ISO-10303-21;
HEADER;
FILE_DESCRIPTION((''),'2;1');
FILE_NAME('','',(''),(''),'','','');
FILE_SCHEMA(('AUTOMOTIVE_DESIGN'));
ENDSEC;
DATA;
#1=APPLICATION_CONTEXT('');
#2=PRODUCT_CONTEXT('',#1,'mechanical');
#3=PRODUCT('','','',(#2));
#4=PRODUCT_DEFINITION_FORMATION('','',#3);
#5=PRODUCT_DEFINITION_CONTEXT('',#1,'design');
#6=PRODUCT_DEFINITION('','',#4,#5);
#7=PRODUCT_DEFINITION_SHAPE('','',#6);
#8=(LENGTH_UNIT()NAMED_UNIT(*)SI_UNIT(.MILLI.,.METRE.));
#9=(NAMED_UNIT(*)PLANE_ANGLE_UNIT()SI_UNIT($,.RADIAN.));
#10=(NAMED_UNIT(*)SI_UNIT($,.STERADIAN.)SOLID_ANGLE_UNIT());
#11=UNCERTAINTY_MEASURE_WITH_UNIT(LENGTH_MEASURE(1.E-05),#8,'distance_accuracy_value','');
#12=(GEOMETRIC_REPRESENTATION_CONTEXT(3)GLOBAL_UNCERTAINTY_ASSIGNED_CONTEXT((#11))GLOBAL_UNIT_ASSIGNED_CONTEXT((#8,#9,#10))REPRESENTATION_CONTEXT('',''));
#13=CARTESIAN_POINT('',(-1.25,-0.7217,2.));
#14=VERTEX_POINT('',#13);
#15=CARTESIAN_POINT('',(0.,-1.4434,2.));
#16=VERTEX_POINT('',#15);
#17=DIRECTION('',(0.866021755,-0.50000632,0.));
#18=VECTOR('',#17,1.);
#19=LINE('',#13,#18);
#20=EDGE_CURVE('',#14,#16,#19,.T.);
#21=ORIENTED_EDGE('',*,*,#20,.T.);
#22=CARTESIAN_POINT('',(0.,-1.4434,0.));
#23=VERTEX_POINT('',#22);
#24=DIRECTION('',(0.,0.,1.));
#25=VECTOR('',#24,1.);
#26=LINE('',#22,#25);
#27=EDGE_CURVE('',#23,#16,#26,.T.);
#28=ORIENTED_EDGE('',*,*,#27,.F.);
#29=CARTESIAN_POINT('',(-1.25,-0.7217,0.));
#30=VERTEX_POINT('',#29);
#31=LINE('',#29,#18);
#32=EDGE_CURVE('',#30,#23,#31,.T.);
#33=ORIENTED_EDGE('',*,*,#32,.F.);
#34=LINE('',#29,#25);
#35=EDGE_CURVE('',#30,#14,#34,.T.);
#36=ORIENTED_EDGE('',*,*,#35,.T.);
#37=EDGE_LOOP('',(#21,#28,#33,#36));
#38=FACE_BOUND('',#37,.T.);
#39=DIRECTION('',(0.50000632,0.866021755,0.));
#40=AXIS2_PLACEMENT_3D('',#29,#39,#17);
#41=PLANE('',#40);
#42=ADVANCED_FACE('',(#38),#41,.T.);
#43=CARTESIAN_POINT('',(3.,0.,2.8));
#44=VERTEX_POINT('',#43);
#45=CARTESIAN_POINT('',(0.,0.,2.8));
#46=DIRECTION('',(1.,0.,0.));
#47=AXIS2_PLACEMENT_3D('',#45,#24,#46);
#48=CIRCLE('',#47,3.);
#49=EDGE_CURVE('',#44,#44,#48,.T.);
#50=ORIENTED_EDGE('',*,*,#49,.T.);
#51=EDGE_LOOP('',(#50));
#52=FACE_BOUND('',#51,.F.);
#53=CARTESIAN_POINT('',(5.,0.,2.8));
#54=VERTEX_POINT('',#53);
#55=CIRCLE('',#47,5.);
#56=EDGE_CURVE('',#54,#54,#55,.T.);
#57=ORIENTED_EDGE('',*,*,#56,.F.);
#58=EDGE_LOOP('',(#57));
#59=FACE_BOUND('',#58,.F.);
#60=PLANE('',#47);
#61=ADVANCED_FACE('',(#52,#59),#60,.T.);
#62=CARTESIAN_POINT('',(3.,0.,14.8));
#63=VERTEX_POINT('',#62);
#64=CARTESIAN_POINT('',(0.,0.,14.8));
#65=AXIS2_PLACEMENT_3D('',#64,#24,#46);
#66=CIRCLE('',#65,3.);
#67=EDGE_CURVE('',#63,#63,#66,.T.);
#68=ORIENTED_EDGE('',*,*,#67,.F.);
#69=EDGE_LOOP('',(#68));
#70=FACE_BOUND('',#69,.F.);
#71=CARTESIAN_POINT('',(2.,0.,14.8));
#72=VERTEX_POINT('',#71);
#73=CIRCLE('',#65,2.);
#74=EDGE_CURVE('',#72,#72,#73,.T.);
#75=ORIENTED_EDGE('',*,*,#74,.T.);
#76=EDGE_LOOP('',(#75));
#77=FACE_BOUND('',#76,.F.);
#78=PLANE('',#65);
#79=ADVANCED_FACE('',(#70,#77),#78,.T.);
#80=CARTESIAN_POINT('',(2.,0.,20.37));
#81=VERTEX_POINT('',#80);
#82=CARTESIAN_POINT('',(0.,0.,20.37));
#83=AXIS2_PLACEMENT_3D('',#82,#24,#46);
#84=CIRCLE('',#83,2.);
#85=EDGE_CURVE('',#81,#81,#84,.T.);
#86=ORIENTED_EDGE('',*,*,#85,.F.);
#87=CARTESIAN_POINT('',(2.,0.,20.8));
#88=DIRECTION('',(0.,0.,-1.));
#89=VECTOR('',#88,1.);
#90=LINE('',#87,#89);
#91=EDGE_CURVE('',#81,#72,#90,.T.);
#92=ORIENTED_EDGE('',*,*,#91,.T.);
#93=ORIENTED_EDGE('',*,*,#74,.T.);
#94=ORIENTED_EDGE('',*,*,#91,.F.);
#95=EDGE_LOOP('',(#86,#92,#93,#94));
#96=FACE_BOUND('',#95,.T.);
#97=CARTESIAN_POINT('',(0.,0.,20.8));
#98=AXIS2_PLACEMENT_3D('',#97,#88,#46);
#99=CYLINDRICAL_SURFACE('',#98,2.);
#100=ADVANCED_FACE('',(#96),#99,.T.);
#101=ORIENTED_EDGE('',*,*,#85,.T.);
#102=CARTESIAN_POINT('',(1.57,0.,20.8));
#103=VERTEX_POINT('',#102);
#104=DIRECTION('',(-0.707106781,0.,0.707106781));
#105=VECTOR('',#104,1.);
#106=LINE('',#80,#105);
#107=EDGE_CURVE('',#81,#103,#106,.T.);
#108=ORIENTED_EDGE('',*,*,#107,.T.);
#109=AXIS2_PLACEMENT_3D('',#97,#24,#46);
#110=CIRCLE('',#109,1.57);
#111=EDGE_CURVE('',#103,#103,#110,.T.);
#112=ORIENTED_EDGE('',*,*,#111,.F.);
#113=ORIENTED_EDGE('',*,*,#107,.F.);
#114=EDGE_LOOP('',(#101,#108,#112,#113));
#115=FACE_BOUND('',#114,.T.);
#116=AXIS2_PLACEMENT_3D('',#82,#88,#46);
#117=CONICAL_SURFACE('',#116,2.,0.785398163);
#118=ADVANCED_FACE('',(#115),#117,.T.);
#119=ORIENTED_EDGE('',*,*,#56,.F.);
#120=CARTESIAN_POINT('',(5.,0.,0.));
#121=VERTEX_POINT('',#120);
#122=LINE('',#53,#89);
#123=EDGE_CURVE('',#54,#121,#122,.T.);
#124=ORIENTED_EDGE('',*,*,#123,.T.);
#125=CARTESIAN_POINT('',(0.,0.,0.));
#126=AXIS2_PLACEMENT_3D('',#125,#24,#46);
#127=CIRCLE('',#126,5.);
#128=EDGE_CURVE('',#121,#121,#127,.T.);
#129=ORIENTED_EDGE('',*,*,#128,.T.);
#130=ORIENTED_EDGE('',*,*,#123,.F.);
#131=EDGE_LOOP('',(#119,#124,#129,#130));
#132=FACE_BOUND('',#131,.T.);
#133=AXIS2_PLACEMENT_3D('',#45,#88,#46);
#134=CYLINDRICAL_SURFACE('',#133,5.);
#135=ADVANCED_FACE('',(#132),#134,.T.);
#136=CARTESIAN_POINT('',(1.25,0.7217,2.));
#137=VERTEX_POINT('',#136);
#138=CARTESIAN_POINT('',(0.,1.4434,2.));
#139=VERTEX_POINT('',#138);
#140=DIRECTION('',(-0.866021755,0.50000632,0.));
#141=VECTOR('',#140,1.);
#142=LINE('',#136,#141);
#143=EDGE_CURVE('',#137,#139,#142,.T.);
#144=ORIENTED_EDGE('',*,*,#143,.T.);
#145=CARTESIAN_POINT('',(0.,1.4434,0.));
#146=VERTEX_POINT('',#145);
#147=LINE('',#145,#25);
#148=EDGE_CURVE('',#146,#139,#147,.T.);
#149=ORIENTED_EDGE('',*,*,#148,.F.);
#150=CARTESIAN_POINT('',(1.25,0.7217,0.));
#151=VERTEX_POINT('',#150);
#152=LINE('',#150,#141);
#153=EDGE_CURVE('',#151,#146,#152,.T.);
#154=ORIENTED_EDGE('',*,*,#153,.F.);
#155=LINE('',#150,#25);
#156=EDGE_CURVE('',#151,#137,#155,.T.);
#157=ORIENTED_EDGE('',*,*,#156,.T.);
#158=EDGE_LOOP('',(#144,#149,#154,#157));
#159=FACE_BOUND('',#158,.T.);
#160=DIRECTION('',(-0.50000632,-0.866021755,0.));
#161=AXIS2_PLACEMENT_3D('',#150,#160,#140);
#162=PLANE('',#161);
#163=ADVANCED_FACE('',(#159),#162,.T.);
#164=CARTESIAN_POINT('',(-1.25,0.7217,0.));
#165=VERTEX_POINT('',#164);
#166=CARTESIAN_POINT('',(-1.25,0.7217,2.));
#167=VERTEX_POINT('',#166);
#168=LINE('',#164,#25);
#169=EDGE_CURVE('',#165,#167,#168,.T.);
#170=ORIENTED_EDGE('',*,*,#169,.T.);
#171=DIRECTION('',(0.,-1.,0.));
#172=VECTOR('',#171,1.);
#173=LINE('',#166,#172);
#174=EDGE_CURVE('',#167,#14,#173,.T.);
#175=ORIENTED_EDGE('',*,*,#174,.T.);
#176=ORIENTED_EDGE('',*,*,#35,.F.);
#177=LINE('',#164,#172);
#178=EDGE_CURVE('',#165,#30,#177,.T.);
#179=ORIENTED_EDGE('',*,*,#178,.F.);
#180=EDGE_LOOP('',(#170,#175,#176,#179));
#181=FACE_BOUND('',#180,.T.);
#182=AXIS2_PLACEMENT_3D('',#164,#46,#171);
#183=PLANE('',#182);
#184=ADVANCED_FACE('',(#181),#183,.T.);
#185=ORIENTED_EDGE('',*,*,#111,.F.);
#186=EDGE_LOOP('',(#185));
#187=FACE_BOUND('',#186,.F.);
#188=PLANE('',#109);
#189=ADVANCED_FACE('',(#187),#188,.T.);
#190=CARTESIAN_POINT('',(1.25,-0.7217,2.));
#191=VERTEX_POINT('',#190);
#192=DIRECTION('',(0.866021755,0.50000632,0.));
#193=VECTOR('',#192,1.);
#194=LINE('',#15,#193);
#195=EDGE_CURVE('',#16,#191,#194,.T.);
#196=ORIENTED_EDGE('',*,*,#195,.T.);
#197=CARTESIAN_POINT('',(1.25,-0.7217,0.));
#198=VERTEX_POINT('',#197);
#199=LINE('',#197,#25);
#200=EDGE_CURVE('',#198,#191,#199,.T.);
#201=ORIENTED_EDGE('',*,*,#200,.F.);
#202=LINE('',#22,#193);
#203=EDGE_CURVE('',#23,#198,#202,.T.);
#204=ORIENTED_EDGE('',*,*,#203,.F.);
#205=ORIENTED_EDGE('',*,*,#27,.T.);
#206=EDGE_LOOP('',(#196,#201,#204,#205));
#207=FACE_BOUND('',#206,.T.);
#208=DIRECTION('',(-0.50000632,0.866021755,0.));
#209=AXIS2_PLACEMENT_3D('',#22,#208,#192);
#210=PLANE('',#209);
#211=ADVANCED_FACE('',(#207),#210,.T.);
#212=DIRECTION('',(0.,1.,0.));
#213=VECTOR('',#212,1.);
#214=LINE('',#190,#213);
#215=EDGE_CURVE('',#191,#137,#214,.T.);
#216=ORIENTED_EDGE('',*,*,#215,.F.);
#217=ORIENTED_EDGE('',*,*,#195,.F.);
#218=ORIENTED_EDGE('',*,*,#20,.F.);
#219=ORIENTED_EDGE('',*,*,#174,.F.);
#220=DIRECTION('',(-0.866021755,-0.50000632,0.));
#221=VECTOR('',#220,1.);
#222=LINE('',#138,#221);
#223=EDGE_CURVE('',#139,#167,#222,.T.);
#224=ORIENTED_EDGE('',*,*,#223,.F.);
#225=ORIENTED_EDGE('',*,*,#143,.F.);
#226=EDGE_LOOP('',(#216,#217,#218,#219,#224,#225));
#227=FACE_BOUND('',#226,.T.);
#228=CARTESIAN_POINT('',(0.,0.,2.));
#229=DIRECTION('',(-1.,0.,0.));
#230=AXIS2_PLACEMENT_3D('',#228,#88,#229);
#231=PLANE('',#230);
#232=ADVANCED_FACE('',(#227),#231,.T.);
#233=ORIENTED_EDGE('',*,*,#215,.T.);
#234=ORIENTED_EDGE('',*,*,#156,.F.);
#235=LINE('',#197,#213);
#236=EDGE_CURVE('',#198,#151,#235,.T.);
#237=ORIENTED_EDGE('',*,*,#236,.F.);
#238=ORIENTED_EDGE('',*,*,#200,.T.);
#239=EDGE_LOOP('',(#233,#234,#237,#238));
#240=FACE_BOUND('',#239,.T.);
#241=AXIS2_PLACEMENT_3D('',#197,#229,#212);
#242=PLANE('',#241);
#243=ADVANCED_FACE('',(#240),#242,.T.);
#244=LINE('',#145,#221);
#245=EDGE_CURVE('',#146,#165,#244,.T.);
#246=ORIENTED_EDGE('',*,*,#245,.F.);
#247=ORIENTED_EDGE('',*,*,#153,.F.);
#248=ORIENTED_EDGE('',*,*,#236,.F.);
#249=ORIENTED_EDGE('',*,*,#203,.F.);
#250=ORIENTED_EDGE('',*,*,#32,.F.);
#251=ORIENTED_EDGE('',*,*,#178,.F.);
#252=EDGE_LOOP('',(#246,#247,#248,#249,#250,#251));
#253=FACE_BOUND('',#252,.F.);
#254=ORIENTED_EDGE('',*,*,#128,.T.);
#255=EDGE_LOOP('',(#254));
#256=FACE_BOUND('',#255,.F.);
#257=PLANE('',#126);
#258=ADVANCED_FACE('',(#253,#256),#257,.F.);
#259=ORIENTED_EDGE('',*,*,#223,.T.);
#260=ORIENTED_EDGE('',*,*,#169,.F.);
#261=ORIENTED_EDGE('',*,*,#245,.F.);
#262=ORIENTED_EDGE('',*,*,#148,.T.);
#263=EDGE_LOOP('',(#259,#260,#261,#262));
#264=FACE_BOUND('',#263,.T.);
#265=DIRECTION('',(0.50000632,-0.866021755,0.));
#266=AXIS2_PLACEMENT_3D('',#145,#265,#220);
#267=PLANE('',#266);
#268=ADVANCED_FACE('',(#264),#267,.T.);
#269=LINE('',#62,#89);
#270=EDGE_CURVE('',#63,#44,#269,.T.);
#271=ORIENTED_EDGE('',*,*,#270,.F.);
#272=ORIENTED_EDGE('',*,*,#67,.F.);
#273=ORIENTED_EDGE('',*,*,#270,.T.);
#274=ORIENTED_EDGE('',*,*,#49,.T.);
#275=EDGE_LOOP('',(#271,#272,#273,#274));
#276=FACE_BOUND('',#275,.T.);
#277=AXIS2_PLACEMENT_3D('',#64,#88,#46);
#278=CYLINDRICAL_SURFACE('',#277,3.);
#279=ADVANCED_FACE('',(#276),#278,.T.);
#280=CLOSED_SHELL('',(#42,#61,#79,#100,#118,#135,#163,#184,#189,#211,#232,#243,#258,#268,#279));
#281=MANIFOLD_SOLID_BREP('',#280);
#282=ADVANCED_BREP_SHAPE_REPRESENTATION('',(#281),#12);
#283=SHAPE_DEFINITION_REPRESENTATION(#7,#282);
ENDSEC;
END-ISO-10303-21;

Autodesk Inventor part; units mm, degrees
ref_plane "YZ Plane" through (0, 0, 0) normal (1, 0, 0) x (0, 1, 0)
ref_plane "XZ Plane" through (0, 0, 0) normal (0, 1, 0) x (-1, 0, 0)
ref_plane "XY Plane" through (0, 0, 0) normal (0, 0, 1) x (1, 0, 0)
sketch "Sketch1" plane through (0, 0, 0) normal (0, 1, 0) x (-1, 0, 0)
  line L0 (0, 0) -> (0, 20.8)
  line L1 (0, 20.8) -> (-2, 20.8)
  line L2 (-2, 20.8) -> (-2, 14.8)
  line L3 (-2, 14.8) -> (-3, 14.8)
  line L4 (-3, 14.8) -> (-3, 2.8)
  line L5 (-3, 2.8) -> (-5, 2.8)
  line L6 (-5, 2.8) -> (-5, 0)
  line L7 (-5, 0) -> (0, 0)
  dimension "d0" = 10
  dimension "d1" = 6
  dimension "d2" = 4
  dimension "d3" = 6
  dimension "d4" = 12
  dimension "d5" = 2.8
revolve "Revolution1" add sketch "Sketch1" angle 360 about axis through (0, 0, 0) along (0, 0, 1)
thread "Thread1" size "M4x0.7" class "6g" standard "ANSI Metric M Profile" length 6 offset 1.2
sketch "Sketch2" plane through (0, 0, 0) normal (0, 0, -1) x (-1, 0, 0)
  line L0 (0, 1.4434) -> (1.25, 0.7217)
  line L1 (1.25, 0.7217) -> (1.25, -0.7217)
  line L2 (1.25, -0.7217) -> (0, -1.4434)
  line L3 (0, -1.4434) -> (-1.25, -0.7217)
  line L4 (-1.25, -0.7217) -> (-1.25, 0.7217)
  line L5 (-1.25, 0.7217) -> (0, 1.4434)
  point P0 (0, 0)
  point P1 (0, 0)
  dimension "d9" = 2.5
extrude "Extrusion1" cut sketch "Sketch2" against normal blind 2
chamfer "Chamfer1" distance 0.43 angle 45 1 edges at (-2, 0, 20.8)
properties part number "DBTSY4-12-6-DHC" material "Stainless Steel AISI 304"
